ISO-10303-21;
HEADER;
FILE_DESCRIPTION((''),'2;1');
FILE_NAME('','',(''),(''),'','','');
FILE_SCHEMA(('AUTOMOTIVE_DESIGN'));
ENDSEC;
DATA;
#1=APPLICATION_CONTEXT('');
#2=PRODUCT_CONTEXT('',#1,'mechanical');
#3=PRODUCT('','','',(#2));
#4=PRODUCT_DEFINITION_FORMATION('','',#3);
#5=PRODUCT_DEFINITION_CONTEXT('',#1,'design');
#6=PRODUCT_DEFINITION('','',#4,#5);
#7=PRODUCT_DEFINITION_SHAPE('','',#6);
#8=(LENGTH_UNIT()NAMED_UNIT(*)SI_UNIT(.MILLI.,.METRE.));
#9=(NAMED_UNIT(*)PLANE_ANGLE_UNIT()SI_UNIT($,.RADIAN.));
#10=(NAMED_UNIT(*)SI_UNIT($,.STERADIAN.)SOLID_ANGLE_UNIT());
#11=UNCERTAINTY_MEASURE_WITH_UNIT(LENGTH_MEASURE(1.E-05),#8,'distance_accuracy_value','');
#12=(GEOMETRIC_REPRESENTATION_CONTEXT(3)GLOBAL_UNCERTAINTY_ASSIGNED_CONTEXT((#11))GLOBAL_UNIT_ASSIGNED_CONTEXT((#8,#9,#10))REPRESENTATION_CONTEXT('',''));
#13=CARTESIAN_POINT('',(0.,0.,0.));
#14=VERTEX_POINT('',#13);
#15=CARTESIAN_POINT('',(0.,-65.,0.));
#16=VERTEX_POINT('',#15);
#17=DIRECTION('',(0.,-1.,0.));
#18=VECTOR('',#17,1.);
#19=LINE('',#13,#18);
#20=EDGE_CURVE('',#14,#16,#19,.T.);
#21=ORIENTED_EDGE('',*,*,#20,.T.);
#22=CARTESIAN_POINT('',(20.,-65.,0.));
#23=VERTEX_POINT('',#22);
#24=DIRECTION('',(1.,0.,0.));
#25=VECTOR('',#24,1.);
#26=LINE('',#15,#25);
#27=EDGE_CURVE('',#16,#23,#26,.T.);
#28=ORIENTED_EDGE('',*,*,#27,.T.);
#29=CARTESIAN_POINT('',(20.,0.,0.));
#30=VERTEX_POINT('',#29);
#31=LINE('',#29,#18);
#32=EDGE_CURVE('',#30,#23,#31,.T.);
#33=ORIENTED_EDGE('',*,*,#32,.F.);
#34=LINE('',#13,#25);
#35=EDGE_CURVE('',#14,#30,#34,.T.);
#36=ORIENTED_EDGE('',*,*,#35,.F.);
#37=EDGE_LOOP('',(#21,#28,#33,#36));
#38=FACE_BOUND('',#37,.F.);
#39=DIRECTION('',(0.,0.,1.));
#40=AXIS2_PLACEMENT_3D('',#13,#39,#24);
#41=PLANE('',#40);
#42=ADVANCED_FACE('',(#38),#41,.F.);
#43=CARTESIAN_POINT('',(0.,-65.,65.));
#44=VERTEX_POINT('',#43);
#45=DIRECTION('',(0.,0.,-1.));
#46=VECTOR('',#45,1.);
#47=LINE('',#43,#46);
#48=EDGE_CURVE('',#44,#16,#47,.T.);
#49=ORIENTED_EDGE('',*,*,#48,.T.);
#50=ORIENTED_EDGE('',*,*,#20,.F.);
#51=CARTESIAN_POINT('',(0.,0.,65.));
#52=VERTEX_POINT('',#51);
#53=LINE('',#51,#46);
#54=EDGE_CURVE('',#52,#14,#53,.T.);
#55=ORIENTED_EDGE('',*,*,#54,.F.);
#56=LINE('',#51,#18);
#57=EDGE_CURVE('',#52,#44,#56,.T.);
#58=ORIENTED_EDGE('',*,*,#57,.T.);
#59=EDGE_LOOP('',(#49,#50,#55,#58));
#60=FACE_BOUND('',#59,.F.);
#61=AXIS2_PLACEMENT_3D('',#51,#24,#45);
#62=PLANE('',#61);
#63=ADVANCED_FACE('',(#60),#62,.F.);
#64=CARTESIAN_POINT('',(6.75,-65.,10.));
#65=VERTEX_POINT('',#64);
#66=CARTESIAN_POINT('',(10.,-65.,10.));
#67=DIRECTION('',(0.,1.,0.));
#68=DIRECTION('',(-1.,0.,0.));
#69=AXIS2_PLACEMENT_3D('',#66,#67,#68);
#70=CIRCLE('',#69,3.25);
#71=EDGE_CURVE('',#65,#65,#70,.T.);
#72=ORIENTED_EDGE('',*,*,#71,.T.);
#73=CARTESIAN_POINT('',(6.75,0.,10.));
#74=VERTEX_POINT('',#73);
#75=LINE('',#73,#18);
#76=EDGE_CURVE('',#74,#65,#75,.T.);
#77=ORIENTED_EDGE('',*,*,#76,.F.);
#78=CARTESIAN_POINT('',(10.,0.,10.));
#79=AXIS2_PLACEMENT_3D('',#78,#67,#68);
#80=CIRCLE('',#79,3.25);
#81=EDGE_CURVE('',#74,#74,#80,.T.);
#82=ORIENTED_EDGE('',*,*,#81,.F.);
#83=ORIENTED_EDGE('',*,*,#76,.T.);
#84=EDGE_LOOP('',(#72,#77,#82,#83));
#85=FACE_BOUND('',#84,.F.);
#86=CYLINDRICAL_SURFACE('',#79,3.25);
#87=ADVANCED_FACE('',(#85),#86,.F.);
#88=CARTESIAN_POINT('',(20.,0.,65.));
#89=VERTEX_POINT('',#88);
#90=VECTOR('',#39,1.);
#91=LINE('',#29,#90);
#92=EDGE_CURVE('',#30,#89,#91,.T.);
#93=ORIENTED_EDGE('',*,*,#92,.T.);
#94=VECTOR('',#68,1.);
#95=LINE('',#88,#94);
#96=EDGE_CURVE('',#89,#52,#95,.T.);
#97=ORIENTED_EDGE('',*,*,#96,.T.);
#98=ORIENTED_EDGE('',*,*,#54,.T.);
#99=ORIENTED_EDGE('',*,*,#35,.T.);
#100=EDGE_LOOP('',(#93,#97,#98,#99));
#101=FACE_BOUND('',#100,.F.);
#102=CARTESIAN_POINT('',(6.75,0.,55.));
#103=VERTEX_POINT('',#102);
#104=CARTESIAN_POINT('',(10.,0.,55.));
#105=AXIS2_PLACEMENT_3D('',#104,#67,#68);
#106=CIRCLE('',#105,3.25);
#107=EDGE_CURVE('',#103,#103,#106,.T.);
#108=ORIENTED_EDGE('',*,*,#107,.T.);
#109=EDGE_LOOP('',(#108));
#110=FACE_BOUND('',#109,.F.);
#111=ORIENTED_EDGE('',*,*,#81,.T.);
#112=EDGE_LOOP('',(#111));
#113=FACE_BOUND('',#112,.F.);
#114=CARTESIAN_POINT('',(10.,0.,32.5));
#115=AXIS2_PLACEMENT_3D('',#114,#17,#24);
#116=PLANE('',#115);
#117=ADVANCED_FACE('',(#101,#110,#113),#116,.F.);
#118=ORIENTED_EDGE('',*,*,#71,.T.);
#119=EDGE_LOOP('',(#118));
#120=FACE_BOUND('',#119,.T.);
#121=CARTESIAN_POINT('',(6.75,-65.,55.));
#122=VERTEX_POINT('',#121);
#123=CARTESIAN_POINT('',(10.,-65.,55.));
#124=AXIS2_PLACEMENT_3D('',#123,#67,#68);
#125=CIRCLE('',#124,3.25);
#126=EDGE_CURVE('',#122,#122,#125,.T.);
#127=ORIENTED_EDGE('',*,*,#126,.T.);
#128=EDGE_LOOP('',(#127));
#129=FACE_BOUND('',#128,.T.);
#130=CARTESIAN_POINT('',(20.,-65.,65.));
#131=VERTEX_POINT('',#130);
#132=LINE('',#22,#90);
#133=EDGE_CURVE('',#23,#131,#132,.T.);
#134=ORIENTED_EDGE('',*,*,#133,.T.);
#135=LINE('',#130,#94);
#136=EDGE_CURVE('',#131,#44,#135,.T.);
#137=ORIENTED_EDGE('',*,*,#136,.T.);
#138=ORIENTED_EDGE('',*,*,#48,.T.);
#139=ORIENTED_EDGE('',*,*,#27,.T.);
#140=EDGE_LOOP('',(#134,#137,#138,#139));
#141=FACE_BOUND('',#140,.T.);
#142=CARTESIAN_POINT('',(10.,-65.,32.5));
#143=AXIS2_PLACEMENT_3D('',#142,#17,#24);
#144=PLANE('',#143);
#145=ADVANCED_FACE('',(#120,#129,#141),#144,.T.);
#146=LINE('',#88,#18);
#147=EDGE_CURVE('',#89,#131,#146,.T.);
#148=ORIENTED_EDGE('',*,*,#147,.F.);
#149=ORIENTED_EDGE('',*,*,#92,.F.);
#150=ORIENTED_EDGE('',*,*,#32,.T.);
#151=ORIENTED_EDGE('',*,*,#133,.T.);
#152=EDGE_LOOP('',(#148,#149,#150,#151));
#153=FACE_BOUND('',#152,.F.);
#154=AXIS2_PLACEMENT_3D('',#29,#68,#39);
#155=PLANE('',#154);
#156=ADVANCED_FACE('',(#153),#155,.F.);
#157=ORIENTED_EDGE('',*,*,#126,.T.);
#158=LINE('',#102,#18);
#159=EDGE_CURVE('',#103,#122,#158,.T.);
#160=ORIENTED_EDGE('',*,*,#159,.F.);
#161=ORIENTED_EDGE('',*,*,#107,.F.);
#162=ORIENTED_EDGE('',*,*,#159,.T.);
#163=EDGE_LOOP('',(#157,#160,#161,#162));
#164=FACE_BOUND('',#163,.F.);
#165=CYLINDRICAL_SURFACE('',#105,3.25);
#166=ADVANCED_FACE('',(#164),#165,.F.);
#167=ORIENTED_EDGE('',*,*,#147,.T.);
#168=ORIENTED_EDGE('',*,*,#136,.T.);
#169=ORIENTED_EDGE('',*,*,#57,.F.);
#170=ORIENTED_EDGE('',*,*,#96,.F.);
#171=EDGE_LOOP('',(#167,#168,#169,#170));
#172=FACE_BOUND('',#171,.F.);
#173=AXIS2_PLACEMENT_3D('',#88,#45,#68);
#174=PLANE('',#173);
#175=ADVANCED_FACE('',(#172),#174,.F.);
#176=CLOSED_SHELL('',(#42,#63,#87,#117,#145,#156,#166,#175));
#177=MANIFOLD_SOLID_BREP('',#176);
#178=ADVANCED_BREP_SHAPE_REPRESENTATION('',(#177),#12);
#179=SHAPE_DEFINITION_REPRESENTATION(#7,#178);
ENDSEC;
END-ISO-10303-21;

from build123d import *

# Parameters (mm, degrees)
F1_DEPTH = 65


# Not quite as in the source:
# - a feature names something its author has since deleted; it is built from what else it names


with BuildPart() as f1:
    # F0 (on Front) → F1 (new body)
    with BuildSketch(Plane.XZ):
        Polygon((0, 10), (0, 0), (20, 0), (20, 65), (0, 65), (0, 55), align=None)
        with BuildLine():
            ThreePointArc((13.25, 10), (10, 6.75), (6.75, 10))
            ThreePointArc((6.75, 10), (10, 13.25), (13.25, 10))
        make_face(mode=Mode.SUBTRACT)
        with BuildLine():
            ThreePointArc((13.25, 55), (10, 51.75), (6.75, 55))
            ThreePointArc((6.75, 55), (10, 58.25), (13.25, 55))
        make_face(mode=Mode.SUBTRACT)
    extrude(amount=F1_DEPTH)


solid = f1.part
